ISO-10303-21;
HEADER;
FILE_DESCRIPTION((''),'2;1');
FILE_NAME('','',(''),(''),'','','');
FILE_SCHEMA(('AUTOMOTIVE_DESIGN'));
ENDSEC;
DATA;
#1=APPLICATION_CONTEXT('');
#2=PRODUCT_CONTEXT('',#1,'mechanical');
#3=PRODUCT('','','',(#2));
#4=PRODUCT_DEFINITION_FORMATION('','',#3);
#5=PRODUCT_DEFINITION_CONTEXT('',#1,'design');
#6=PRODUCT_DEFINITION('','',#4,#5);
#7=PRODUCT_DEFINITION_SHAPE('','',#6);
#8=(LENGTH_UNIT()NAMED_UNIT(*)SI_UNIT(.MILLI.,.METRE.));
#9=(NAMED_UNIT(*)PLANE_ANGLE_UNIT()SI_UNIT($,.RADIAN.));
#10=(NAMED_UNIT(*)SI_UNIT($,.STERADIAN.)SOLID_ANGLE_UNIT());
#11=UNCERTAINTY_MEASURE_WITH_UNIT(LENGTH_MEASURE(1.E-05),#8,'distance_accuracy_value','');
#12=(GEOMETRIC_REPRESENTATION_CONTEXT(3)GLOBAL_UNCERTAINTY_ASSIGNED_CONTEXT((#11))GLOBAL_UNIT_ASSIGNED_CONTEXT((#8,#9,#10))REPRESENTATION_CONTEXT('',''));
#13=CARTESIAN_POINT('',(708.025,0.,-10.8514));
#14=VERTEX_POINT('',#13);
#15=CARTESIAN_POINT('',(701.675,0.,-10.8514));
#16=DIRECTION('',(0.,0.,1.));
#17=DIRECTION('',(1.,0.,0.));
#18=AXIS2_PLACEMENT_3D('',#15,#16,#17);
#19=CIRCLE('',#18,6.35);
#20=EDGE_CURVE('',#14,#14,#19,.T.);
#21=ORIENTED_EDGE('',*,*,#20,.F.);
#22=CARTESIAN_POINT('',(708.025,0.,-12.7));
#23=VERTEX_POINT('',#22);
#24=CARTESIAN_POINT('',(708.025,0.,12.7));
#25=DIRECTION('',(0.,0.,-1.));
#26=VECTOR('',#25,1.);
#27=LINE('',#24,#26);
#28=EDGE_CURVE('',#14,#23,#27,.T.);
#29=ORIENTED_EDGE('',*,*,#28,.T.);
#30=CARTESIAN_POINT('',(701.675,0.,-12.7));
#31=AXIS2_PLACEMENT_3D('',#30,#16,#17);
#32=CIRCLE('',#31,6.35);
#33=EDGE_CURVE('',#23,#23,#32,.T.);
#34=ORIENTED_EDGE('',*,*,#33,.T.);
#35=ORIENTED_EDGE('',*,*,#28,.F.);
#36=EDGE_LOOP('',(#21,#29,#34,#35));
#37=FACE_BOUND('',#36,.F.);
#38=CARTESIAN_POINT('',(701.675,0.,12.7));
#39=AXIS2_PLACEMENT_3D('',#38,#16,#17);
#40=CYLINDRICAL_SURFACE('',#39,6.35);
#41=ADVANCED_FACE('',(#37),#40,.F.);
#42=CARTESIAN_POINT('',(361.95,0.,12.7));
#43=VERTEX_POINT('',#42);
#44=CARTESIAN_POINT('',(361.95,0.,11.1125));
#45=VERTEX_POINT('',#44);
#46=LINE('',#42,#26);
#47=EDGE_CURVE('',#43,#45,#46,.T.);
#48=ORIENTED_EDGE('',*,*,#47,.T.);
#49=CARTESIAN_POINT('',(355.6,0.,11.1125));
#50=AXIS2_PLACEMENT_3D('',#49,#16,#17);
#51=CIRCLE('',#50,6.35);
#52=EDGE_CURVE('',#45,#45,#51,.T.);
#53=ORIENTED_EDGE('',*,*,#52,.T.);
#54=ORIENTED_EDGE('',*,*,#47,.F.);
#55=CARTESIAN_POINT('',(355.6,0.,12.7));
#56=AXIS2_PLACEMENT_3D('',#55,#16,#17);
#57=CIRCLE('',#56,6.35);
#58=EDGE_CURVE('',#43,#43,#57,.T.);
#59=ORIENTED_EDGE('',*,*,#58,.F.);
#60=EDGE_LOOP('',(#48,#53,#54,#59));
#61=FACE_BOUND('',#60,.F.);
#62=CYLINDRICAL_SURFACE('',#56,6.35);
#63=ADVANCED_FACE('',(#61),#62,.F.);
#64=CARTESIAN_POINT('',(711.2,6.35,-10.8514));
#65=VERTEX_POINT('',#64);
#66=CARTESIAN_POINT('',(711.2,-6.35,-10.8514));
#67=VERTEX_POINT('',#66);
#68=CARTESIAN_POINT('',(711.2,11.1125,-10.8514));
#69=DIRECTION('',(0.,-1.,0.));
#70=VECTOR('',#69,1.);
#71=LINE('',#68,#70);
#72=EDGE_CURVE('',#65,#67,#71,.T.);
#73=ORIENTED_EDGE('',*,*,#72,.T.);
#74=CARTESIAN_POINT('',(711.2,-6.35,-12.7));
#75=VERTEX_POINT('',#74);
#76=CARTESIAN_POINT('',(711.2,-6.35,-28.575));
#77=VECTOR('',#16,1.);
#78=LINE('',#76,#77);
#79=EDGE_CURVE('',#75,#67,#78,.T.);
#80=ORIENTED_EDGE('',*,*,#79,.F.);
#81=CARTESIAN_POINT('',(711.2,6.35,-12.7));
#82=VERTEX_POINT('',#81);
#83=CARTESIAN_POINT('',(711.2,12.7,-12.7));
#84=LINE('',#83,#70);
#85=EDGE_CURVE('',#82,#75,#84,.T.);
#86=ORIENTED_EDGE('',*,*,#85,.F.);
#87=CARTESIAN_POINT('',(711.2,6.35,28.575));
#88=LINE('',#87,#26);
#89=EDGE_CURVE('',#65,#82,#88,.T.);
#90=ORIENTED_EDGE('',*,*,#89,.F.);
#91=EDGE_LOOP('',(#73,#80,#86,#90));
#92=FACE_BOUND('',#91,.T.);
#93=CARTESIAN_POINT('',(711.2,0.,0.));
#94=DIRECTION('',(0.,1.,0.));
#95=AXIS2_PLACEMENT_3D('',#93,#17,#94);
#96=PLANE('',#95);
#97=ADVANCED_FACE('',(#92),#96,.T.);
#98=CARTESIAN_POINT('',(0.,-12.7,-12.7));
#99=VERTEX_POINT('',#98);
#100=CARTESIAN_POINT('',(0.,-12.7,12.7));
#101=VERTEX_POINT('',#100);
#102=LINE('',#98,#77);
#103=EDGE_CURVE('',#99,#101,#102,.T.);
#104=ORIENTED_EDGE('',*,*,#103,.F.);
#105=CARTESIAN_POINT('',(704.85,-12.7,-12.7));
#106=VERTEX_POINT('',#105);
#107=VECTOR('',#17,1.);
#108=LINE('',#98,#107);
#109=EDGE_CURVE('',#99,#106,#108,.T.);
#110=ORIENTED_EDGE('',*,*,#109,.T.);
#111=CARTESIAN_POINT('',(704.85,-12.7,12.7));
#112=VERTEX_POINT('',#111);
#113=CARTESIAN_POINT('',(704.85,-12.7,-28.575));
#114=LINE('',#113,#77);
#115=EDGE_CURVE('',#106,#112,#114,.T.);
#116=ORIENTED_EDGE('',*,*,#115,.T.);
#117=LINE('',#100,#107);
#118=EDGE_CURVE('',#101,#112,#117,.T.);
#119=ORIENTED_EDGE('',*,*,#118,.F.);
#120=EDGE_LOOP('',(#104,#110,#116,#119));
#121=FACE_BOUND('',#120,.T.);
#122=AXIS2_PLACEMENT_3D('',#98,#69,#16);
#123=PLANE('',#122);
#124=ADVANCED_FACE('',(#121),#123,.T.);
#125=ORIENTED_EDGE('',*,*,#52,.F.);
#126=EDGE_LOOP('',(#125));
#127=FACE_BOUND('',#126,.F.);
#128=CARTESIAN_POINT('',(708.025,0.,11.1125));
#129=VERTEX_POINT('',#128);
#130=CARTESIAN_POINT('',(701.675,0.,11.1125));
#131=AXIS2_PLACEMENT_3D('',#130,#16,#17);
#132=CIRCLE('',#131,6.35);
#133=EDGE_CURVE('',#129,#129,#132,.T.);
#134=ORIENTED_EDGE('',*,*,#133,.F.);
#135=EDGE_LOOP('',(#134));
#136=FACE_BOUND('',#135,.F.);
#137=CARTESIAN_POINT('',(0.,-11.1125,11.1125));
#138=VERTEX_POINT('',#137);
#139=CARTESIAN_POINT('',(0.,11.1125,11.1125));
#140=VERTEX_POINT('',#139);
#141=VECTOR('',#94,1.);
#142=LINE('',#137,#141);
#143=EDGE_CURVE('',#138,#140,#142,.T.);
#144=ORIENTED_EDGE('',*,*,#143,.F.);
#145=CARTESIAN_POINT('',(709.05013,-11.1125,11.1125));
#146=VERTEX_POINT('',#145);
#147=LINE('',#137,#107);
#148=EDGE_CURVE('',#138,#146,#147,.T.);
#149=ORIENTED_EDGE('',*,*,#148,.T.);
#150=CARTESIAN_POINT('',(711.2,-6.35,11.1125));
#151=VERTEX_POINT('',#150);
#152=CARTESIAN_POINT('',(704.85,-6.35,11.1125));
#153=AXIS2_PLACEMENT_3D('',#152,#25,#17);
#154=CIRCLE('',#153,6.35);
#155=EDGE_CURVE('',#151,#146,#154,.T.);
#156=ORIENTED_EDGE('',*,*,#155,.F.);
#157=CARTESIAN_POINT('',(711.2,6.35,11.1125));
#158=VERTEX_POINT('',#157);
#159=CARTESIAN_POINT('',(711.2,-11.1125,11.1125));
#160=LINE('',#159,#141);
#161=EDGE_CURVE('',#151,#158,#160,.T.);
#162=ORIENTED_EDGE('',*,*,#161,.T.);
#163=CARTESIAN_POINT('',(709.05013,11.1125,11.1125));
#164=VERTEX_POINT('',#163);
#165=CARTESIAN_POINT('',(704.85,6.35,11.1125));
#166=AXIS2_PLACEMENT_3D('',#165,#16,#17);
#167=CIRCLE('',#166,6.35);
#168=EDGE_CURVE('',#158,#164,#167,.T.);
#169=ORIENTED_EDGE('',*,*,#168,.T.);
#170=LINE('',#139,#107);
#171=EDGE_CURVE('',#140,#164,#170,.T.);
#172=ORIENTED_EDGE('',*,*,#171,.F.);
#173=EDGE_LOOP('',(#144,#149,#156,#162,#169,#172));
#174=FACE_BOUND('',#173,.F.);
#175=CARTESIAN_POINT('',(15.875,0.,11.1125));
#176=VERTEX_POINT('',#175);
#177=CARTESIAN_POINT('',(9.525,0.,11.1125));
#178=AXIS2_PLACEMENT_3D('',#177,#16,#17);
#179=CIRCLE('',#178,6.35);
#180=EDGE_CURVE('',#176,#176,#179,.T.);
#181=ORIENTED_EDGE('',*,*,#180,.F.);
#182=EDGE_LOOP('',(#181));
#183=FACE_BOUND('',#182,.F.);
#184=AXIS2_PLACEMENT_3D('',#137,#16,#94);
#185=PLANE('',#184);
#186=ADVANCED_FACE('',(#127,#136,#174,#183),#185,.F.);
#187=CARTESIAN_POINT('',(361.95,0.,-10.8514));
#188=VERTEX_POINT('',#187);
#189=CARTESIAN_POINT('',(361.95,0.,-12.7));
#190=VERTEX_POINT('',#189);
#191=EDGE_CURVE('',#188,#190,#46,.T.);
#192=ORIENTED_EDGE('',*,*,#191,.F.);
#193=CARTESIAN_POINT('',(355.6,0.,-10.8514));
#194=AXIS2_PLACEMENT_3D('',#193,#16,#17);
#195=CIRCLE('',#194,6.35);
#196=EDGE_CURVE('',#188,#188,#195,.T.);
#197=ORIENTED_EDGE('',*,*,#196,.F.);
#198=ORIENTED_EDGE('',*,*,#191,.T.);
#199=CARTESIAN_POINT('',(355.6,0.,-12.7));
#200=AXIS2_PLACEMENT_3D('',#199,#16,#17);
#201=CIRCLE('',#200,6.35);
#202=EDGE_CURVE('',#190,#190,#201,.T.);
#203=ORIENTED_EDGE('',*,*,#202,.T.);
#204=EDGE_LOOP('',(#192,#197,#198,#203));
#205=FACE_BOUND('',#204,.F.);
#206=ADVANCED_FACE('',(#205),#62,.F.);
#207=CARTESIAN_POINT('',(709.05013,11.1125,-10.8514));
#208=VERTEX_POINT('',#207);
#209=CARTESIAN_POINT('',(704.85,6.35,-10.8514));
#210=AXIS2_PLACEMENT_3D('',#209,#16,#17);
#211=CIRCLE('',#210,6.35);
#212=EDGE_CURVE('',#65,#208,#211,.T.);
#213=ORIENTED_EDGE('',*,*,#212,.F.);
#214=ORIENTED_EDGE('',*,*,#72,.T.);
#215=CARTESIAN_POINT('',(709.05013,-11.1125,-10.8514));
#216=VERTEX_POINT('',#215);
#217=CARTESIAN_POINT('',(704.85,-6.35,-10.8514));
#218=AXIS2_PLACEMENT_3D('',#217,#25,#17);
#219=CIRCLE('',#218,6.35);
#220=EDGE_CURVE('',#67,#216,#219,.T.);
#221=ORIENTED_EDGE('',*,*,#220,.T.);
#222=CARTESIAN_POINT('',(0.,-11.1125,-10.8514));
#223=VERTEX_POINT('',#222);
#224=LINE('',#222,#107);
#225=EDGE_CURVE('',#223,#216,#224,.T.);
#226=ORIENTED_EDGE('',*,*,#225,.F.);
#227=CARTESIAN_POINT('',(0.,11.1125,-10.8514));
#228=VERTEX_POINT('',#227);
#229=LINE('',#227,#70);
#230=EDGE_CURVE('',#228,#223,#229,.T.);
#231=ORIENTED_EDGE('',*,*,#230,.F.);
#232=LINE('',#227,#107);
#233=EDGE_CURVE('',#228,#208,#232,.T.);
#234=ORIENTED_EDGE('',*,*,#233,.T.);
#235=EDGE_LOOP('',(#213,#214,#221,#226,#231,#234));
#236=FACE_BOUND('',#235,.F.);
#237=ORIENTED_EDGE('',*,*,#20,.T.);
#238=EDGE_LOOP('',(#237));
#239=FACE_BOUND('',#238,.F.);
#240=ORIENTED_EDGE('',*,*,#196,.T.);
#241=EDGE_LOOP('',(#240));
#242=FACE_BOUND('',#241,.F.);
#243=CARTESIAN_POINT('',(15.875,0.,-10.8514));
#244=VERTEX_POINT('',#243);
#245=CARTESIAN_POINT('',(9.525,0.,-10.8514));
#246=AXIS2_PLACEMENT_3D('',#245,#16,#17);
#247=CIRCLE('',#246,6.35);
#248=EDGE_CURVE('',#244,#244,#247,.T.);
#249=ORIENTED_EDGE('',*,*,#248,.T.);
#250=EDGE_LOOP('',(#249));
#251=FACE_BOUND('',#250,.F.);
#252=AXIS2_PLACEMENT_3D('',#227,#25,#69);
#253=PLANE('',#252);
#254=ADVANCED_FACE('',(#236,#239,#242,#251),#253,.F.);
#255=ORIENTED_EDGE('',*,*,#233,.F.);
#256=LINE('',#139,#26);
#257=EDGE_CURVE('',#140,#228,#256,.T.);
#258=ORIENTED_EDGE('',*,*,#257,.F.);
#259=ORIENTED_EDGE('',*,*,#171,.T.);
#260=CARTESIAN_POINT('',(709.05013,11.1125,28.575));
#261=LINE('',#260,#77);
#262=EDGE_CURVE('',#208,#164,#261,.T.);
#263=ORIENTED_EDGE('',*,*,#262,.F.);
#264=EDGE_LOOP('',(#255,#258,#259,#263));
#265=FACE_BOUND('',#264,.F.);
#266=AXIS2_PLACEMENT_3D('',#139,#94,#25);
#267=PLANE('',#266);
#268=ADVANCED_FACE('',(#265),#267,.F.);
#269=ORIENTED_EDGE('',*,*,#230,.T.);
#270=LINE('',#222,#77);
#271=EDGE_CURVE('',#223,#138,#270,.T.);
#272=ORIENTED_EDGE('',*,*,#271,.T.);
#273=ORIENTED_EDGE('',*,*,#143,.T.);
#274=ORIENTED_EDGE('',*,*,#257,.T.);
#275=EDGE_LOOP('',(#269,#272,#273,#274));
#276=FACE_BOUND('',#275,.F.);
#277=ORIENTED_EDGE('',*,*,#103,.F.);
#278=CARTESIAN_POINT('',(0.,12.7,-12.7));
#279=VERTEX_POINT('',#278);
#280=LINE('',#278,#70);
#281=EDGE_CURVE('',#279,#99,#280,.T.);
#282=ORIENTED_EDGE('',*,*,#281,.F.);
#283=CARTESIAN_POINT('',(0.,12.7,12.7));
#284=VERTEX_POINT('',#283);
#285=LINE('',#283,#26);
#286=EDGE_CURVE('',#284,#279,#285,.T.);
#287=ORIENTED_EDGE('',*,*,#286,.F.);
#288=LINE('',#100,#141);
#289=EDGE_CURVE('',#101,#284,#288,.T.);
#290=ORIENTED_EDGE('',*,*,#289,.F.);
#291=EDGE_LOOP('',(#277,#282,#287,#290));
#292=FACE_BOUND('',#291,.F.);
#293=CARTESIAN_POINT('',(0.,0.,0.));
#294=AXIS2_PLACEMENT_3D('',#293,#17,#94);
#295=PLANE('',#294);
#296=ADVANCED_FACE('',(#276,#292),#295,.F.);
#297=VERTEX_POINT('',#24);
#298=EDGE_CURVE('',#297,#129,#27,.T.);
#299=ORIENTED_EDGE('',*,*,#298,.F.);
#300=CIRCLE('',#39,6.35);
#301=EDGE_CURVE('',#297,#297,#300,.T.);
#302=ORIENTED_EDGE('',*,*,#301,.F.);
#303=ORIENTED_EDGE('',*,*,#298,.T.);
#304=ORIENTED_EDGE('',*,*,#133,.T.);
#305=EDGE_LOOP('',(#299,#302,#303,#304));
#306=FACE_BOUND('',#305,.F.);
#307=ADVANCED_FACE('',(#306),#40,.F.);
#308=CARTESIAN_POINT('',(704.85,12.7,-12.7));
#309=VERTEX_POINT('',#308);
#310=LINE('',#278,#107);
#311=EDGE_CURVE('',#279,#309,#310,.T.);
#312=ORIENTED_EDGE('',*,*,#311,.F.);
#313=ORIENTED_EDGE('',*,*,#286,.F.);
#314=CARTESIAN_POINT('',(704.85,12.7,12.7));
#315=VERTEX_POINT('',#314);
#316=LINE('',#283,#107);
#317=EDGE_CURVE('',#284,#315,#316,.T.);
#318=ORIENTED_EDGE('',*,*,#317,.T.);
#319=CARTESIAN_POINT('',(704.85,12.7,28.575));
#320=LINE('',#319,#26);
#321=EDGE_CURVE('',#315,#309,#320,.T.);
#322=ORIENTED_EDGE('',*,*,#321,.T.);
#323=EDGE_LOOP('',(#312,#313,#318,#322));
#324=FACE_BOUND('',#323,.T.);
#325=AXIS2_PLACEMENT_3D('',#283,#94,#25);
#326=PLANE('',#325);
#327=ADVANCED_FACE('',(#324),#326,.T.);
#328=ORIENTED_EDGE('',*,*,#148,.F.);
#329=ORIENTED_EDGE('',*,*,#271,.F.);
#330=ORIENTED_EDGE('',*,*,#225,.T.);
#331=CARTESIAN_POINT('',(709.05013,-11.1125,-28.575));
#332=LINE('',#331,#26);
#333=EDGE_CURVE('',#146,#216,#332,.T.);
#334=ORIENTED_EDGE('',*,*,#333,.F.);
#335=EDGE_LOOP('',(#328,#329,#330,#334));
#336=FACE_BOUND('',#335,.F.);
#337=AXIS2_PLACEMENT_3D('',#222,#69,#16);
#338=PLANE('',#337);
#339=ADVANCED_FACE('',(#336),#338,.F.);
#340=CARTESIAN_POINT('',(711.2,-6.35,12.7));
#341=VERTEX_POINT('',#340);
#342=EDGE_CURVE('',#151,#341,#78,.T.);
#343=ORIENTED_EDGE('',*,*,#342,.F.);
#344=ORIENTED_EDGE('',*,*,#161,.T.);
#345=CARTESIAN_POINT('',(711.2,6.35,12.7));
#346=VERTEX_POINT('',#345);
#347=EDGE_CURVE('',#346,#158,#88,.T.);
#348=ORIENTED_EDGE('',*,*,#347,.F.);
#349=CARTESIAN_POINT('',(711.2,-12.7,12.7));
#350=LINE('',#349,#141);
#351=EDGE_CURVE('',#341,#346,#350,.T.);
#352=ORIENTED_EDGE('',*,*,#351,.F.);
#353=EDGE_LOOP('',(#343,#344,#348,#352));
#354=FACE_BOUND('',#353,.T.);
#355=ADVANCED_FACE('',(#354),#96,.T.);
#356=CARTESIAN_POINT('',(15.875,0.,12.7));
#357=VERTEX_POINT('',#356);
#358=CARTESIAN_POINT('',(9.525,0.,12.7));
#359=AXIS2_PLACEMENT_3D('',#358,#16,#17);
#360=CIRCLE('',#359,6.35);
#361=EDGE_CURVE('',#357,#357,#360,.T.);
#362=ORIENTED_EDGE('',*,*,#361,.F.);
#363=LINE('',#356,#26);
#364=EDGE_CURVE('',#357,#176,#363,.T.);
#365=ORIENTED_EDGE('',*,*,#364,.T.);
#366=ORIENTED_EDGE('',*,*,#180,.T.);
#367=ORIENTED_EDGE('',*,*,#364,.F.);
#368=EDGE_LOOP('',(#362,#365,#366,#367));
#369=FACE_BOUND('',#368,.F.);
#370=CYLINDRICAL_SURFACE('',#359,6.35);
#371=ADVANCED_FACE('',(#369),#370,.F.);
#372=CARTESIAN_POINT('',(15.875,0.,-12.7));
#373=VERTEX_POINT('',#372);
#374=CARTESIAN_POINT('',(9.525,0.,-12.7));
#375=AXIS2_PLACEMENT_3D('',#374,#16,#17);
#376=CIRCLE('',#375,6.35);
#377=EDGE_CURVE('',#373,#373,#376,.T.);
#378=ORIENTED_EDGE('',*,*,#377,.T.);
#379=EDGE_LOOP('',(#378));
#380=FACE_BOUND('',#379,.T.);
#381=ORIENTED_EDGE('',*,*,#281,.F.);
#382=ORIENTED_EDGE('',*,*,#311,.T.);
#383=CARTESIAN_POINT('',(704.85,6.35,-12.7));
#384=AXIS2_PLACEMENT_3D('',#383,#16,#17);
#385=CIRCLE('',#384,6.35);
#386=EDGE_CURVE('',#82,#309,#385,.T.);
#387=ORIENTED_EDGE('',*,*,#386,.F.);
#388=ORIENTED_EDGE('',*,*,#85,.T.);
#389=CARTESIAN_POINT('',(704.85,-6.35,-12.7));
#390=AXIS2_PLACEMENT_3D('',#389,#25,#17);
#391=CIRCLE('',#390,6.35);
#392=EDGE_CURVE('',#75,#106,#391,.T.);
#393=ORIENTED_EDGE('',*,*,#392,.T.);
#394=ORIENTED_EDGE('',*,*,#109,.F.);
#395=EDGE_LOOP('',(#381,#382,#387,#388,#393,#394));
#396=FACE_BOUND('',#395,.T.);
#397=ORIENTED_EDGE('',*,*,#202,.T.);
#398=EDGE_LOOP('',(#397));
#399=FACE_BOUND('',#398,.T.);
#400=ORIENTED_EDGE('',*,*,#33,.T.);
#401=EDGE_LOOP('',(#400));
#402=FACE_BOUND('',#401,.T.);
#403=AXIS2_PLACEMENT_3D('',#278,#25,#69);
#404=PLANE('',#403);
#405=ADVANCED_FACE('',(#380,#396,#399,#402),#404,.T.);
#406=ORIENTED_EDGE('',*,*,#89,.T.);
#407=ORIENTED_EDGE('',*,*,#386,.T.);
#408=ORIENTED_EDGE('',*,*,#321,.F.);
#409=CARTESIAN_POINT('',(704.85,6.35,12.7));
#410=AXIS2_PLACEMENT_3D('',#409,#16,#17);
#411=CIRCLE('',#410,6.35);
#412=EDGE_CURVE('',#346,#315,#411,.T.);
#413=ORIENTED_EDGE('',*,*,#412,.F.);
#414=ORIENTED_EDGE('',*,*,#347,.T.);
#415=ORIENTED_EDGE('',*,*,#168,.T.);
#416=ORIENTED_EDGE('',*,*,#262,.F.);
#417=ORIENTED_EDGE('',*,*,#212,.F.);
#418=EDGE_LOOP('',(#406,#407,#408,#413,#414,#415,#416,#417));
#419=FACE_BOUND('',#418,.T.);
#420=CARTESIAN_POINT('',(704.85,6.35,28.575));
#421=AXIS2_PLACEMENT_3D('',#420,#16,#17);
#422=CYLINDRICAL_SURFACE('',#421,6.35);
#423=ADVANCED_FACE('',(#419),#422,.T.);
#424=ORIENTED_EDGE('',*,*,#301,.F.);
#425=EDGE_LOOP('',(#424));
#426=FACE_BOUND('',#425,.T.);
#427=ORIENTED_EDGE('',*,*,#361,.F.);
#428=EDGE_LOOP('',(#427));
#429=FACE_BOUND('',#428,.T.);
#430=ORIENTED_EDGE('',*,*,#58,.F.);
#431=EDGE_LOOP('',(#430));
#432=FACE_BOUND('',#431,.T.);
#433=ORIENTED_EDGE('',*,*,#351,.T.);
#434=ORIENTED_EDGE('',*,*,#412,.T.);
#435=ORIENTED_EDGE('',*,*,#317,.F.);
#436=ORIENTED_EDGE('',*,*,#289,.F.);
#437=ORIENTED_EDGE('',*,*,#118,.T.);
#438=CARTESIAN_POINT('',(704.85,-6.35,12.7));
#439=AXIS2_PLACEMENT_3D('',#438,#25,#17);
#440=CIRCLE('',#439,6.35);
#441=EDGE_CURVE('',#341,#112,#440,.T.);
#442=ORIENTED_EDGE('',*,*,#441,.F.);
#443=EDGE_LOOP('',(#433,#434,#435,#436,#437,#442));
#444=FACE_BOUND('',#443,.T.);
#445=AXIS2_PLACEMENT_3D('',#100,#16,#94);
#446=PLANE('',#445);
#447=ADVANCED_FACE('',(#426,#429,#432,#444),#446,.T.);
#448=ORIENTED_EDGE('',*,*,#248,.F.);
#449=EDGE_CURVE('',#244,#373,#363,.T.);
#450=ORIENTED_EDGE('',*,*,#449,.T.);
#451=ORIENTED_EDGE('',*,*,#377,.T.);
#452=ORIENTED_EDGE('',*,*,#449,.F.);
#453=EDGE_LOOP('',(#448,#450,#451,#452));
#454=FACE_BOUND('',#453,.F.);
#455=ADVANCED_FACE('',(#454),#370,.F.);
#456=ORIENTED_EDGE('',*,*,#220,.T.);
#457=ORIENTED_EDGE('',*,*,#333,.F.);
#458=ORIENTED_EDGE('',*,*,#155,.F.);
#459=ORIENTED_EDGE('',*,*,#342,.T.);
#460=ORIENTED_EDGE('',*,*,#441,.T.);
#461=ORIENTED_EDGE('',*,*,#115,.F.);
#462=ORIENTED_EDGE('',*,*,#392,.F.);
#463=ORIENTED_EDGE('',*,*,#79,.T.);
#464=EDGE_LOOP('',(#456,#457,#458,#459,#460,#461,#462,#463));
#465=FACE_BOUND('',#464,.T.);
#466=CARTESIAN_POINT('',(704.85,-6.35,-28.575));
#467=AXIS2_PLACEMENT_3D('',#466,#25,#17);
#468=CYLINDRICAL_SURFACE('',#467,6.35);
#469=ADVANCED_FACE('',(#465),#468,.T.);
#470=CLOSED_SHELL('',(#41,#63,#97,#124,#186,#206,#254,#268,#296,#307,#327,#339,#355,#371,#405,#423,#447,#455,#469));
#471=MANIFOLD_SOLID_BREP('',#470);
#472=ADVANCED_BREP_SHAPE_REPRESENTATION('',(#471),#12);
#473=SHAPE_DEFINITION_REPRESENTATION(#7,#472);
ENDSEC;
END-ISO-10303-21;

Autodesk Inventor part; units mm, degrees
ref_plane "YZ Plane" through (0, 0, 0) normal (1, 0, 0) x (0, 1, 0)
ref_plane "XZ Plane" through (0, 0, 0) normal (0, 1, 0) x (-1, 0, 0)
ref_plane "XY Plane" through (0, 0, 0) normal (0, 0, 1) x (1, 0, 0)
sketch "Sketch1" plane through (0, 0, 0) normal (1, 0, 0) x (0, 1, 0)
  line L0 (-12.7, 12.7) -> (12.7, 12.7)
  line L1 (12.7, 12.7) -> (12.7, -12.7)
  line L2 (12.7, -12.7) -> (-12.7, -12.7)
  line L3 (-12.7, -12.7) -> (-12.7, 12.7)
  line L4 (-11.1125, 11.1125) -> (11.1125, 11.1125)
  line L5 (11.1125, 11.1125) -> (11.1125, -10.8514)
  line L6 (11.1125, -10.8514) -> (-11.1125, -10.8514)
  line L7 (-11.1125, -10.8514) -> (-11.1125, 11.1125)
  point P0 (0, 0)
  point P1 (0, 12.7)
  point P2 (-12.7, 0)
  dimension "d0" = 25.4
  dimension "d1" = 25.4
  dimension "d2" = 1.5875
  dimension "d3" = 1.5875
  dimension "d4" = 1.5875
extrude "Extrusion1" add sketch "Sketch1" along normal blind 711.2
sketch "Sketch2" plane through (0, -12.7, 12.7) normal (0, 0, 1) x (1, 0, 0)
  circle A0 centre (9.525, 12.7) radius 6.35
  circle A1 centre (701.675, 12.7) radius 6.35
  line L0 (711.2, 25.4) -> (711.2, 0) projected
  line L1 (0, 0) -> (0, 25.4) projected
  line L2 (0, 0) -> (711.2, 0) projected
  circle A2 centre (355.6, 12.7) radius 6.35
  point P0 (0, 12.7)
  point P1 (395.7549, 0)
  point P2 (355.6, 0)
  dimension "d7" = 12.7
  dimension "d8" = 9.525
  dimension "d9" = 12.7
  dimension "d10" = 9.525
  dimension "d17" = 12.7
  dimension "d23" = 355.6
  dimension "BarLengthRef" = 711.2
extrude "Extrusion2" cut sketch "Sketch2" against normal blind 50.8 contours A0 | A1
extrude "Extrusion4" cut sketch "Sketch2" against normal blind 25.4 contours A2
fillet "Fillet1" radius 6.35 1 edges at (711.2, 12.7, 0)
fillet "Fillet2" radius 6.35 1 edges at (711.2, -12.7, 0)
equation "\"d1\" = d0"
equation "\"d3\" = d2"
equation "\"d4\" = d2"
equation "\"d9\" = d7"
equation "\"d10\" = d8"
equation "\"d17\" = d7"
equation "\"d23\" = 0.5 * BarLengthRef"
equation "\"XLS_Barlength\" = 711.2"
properties part number "2018 Long Bar Offset center"
